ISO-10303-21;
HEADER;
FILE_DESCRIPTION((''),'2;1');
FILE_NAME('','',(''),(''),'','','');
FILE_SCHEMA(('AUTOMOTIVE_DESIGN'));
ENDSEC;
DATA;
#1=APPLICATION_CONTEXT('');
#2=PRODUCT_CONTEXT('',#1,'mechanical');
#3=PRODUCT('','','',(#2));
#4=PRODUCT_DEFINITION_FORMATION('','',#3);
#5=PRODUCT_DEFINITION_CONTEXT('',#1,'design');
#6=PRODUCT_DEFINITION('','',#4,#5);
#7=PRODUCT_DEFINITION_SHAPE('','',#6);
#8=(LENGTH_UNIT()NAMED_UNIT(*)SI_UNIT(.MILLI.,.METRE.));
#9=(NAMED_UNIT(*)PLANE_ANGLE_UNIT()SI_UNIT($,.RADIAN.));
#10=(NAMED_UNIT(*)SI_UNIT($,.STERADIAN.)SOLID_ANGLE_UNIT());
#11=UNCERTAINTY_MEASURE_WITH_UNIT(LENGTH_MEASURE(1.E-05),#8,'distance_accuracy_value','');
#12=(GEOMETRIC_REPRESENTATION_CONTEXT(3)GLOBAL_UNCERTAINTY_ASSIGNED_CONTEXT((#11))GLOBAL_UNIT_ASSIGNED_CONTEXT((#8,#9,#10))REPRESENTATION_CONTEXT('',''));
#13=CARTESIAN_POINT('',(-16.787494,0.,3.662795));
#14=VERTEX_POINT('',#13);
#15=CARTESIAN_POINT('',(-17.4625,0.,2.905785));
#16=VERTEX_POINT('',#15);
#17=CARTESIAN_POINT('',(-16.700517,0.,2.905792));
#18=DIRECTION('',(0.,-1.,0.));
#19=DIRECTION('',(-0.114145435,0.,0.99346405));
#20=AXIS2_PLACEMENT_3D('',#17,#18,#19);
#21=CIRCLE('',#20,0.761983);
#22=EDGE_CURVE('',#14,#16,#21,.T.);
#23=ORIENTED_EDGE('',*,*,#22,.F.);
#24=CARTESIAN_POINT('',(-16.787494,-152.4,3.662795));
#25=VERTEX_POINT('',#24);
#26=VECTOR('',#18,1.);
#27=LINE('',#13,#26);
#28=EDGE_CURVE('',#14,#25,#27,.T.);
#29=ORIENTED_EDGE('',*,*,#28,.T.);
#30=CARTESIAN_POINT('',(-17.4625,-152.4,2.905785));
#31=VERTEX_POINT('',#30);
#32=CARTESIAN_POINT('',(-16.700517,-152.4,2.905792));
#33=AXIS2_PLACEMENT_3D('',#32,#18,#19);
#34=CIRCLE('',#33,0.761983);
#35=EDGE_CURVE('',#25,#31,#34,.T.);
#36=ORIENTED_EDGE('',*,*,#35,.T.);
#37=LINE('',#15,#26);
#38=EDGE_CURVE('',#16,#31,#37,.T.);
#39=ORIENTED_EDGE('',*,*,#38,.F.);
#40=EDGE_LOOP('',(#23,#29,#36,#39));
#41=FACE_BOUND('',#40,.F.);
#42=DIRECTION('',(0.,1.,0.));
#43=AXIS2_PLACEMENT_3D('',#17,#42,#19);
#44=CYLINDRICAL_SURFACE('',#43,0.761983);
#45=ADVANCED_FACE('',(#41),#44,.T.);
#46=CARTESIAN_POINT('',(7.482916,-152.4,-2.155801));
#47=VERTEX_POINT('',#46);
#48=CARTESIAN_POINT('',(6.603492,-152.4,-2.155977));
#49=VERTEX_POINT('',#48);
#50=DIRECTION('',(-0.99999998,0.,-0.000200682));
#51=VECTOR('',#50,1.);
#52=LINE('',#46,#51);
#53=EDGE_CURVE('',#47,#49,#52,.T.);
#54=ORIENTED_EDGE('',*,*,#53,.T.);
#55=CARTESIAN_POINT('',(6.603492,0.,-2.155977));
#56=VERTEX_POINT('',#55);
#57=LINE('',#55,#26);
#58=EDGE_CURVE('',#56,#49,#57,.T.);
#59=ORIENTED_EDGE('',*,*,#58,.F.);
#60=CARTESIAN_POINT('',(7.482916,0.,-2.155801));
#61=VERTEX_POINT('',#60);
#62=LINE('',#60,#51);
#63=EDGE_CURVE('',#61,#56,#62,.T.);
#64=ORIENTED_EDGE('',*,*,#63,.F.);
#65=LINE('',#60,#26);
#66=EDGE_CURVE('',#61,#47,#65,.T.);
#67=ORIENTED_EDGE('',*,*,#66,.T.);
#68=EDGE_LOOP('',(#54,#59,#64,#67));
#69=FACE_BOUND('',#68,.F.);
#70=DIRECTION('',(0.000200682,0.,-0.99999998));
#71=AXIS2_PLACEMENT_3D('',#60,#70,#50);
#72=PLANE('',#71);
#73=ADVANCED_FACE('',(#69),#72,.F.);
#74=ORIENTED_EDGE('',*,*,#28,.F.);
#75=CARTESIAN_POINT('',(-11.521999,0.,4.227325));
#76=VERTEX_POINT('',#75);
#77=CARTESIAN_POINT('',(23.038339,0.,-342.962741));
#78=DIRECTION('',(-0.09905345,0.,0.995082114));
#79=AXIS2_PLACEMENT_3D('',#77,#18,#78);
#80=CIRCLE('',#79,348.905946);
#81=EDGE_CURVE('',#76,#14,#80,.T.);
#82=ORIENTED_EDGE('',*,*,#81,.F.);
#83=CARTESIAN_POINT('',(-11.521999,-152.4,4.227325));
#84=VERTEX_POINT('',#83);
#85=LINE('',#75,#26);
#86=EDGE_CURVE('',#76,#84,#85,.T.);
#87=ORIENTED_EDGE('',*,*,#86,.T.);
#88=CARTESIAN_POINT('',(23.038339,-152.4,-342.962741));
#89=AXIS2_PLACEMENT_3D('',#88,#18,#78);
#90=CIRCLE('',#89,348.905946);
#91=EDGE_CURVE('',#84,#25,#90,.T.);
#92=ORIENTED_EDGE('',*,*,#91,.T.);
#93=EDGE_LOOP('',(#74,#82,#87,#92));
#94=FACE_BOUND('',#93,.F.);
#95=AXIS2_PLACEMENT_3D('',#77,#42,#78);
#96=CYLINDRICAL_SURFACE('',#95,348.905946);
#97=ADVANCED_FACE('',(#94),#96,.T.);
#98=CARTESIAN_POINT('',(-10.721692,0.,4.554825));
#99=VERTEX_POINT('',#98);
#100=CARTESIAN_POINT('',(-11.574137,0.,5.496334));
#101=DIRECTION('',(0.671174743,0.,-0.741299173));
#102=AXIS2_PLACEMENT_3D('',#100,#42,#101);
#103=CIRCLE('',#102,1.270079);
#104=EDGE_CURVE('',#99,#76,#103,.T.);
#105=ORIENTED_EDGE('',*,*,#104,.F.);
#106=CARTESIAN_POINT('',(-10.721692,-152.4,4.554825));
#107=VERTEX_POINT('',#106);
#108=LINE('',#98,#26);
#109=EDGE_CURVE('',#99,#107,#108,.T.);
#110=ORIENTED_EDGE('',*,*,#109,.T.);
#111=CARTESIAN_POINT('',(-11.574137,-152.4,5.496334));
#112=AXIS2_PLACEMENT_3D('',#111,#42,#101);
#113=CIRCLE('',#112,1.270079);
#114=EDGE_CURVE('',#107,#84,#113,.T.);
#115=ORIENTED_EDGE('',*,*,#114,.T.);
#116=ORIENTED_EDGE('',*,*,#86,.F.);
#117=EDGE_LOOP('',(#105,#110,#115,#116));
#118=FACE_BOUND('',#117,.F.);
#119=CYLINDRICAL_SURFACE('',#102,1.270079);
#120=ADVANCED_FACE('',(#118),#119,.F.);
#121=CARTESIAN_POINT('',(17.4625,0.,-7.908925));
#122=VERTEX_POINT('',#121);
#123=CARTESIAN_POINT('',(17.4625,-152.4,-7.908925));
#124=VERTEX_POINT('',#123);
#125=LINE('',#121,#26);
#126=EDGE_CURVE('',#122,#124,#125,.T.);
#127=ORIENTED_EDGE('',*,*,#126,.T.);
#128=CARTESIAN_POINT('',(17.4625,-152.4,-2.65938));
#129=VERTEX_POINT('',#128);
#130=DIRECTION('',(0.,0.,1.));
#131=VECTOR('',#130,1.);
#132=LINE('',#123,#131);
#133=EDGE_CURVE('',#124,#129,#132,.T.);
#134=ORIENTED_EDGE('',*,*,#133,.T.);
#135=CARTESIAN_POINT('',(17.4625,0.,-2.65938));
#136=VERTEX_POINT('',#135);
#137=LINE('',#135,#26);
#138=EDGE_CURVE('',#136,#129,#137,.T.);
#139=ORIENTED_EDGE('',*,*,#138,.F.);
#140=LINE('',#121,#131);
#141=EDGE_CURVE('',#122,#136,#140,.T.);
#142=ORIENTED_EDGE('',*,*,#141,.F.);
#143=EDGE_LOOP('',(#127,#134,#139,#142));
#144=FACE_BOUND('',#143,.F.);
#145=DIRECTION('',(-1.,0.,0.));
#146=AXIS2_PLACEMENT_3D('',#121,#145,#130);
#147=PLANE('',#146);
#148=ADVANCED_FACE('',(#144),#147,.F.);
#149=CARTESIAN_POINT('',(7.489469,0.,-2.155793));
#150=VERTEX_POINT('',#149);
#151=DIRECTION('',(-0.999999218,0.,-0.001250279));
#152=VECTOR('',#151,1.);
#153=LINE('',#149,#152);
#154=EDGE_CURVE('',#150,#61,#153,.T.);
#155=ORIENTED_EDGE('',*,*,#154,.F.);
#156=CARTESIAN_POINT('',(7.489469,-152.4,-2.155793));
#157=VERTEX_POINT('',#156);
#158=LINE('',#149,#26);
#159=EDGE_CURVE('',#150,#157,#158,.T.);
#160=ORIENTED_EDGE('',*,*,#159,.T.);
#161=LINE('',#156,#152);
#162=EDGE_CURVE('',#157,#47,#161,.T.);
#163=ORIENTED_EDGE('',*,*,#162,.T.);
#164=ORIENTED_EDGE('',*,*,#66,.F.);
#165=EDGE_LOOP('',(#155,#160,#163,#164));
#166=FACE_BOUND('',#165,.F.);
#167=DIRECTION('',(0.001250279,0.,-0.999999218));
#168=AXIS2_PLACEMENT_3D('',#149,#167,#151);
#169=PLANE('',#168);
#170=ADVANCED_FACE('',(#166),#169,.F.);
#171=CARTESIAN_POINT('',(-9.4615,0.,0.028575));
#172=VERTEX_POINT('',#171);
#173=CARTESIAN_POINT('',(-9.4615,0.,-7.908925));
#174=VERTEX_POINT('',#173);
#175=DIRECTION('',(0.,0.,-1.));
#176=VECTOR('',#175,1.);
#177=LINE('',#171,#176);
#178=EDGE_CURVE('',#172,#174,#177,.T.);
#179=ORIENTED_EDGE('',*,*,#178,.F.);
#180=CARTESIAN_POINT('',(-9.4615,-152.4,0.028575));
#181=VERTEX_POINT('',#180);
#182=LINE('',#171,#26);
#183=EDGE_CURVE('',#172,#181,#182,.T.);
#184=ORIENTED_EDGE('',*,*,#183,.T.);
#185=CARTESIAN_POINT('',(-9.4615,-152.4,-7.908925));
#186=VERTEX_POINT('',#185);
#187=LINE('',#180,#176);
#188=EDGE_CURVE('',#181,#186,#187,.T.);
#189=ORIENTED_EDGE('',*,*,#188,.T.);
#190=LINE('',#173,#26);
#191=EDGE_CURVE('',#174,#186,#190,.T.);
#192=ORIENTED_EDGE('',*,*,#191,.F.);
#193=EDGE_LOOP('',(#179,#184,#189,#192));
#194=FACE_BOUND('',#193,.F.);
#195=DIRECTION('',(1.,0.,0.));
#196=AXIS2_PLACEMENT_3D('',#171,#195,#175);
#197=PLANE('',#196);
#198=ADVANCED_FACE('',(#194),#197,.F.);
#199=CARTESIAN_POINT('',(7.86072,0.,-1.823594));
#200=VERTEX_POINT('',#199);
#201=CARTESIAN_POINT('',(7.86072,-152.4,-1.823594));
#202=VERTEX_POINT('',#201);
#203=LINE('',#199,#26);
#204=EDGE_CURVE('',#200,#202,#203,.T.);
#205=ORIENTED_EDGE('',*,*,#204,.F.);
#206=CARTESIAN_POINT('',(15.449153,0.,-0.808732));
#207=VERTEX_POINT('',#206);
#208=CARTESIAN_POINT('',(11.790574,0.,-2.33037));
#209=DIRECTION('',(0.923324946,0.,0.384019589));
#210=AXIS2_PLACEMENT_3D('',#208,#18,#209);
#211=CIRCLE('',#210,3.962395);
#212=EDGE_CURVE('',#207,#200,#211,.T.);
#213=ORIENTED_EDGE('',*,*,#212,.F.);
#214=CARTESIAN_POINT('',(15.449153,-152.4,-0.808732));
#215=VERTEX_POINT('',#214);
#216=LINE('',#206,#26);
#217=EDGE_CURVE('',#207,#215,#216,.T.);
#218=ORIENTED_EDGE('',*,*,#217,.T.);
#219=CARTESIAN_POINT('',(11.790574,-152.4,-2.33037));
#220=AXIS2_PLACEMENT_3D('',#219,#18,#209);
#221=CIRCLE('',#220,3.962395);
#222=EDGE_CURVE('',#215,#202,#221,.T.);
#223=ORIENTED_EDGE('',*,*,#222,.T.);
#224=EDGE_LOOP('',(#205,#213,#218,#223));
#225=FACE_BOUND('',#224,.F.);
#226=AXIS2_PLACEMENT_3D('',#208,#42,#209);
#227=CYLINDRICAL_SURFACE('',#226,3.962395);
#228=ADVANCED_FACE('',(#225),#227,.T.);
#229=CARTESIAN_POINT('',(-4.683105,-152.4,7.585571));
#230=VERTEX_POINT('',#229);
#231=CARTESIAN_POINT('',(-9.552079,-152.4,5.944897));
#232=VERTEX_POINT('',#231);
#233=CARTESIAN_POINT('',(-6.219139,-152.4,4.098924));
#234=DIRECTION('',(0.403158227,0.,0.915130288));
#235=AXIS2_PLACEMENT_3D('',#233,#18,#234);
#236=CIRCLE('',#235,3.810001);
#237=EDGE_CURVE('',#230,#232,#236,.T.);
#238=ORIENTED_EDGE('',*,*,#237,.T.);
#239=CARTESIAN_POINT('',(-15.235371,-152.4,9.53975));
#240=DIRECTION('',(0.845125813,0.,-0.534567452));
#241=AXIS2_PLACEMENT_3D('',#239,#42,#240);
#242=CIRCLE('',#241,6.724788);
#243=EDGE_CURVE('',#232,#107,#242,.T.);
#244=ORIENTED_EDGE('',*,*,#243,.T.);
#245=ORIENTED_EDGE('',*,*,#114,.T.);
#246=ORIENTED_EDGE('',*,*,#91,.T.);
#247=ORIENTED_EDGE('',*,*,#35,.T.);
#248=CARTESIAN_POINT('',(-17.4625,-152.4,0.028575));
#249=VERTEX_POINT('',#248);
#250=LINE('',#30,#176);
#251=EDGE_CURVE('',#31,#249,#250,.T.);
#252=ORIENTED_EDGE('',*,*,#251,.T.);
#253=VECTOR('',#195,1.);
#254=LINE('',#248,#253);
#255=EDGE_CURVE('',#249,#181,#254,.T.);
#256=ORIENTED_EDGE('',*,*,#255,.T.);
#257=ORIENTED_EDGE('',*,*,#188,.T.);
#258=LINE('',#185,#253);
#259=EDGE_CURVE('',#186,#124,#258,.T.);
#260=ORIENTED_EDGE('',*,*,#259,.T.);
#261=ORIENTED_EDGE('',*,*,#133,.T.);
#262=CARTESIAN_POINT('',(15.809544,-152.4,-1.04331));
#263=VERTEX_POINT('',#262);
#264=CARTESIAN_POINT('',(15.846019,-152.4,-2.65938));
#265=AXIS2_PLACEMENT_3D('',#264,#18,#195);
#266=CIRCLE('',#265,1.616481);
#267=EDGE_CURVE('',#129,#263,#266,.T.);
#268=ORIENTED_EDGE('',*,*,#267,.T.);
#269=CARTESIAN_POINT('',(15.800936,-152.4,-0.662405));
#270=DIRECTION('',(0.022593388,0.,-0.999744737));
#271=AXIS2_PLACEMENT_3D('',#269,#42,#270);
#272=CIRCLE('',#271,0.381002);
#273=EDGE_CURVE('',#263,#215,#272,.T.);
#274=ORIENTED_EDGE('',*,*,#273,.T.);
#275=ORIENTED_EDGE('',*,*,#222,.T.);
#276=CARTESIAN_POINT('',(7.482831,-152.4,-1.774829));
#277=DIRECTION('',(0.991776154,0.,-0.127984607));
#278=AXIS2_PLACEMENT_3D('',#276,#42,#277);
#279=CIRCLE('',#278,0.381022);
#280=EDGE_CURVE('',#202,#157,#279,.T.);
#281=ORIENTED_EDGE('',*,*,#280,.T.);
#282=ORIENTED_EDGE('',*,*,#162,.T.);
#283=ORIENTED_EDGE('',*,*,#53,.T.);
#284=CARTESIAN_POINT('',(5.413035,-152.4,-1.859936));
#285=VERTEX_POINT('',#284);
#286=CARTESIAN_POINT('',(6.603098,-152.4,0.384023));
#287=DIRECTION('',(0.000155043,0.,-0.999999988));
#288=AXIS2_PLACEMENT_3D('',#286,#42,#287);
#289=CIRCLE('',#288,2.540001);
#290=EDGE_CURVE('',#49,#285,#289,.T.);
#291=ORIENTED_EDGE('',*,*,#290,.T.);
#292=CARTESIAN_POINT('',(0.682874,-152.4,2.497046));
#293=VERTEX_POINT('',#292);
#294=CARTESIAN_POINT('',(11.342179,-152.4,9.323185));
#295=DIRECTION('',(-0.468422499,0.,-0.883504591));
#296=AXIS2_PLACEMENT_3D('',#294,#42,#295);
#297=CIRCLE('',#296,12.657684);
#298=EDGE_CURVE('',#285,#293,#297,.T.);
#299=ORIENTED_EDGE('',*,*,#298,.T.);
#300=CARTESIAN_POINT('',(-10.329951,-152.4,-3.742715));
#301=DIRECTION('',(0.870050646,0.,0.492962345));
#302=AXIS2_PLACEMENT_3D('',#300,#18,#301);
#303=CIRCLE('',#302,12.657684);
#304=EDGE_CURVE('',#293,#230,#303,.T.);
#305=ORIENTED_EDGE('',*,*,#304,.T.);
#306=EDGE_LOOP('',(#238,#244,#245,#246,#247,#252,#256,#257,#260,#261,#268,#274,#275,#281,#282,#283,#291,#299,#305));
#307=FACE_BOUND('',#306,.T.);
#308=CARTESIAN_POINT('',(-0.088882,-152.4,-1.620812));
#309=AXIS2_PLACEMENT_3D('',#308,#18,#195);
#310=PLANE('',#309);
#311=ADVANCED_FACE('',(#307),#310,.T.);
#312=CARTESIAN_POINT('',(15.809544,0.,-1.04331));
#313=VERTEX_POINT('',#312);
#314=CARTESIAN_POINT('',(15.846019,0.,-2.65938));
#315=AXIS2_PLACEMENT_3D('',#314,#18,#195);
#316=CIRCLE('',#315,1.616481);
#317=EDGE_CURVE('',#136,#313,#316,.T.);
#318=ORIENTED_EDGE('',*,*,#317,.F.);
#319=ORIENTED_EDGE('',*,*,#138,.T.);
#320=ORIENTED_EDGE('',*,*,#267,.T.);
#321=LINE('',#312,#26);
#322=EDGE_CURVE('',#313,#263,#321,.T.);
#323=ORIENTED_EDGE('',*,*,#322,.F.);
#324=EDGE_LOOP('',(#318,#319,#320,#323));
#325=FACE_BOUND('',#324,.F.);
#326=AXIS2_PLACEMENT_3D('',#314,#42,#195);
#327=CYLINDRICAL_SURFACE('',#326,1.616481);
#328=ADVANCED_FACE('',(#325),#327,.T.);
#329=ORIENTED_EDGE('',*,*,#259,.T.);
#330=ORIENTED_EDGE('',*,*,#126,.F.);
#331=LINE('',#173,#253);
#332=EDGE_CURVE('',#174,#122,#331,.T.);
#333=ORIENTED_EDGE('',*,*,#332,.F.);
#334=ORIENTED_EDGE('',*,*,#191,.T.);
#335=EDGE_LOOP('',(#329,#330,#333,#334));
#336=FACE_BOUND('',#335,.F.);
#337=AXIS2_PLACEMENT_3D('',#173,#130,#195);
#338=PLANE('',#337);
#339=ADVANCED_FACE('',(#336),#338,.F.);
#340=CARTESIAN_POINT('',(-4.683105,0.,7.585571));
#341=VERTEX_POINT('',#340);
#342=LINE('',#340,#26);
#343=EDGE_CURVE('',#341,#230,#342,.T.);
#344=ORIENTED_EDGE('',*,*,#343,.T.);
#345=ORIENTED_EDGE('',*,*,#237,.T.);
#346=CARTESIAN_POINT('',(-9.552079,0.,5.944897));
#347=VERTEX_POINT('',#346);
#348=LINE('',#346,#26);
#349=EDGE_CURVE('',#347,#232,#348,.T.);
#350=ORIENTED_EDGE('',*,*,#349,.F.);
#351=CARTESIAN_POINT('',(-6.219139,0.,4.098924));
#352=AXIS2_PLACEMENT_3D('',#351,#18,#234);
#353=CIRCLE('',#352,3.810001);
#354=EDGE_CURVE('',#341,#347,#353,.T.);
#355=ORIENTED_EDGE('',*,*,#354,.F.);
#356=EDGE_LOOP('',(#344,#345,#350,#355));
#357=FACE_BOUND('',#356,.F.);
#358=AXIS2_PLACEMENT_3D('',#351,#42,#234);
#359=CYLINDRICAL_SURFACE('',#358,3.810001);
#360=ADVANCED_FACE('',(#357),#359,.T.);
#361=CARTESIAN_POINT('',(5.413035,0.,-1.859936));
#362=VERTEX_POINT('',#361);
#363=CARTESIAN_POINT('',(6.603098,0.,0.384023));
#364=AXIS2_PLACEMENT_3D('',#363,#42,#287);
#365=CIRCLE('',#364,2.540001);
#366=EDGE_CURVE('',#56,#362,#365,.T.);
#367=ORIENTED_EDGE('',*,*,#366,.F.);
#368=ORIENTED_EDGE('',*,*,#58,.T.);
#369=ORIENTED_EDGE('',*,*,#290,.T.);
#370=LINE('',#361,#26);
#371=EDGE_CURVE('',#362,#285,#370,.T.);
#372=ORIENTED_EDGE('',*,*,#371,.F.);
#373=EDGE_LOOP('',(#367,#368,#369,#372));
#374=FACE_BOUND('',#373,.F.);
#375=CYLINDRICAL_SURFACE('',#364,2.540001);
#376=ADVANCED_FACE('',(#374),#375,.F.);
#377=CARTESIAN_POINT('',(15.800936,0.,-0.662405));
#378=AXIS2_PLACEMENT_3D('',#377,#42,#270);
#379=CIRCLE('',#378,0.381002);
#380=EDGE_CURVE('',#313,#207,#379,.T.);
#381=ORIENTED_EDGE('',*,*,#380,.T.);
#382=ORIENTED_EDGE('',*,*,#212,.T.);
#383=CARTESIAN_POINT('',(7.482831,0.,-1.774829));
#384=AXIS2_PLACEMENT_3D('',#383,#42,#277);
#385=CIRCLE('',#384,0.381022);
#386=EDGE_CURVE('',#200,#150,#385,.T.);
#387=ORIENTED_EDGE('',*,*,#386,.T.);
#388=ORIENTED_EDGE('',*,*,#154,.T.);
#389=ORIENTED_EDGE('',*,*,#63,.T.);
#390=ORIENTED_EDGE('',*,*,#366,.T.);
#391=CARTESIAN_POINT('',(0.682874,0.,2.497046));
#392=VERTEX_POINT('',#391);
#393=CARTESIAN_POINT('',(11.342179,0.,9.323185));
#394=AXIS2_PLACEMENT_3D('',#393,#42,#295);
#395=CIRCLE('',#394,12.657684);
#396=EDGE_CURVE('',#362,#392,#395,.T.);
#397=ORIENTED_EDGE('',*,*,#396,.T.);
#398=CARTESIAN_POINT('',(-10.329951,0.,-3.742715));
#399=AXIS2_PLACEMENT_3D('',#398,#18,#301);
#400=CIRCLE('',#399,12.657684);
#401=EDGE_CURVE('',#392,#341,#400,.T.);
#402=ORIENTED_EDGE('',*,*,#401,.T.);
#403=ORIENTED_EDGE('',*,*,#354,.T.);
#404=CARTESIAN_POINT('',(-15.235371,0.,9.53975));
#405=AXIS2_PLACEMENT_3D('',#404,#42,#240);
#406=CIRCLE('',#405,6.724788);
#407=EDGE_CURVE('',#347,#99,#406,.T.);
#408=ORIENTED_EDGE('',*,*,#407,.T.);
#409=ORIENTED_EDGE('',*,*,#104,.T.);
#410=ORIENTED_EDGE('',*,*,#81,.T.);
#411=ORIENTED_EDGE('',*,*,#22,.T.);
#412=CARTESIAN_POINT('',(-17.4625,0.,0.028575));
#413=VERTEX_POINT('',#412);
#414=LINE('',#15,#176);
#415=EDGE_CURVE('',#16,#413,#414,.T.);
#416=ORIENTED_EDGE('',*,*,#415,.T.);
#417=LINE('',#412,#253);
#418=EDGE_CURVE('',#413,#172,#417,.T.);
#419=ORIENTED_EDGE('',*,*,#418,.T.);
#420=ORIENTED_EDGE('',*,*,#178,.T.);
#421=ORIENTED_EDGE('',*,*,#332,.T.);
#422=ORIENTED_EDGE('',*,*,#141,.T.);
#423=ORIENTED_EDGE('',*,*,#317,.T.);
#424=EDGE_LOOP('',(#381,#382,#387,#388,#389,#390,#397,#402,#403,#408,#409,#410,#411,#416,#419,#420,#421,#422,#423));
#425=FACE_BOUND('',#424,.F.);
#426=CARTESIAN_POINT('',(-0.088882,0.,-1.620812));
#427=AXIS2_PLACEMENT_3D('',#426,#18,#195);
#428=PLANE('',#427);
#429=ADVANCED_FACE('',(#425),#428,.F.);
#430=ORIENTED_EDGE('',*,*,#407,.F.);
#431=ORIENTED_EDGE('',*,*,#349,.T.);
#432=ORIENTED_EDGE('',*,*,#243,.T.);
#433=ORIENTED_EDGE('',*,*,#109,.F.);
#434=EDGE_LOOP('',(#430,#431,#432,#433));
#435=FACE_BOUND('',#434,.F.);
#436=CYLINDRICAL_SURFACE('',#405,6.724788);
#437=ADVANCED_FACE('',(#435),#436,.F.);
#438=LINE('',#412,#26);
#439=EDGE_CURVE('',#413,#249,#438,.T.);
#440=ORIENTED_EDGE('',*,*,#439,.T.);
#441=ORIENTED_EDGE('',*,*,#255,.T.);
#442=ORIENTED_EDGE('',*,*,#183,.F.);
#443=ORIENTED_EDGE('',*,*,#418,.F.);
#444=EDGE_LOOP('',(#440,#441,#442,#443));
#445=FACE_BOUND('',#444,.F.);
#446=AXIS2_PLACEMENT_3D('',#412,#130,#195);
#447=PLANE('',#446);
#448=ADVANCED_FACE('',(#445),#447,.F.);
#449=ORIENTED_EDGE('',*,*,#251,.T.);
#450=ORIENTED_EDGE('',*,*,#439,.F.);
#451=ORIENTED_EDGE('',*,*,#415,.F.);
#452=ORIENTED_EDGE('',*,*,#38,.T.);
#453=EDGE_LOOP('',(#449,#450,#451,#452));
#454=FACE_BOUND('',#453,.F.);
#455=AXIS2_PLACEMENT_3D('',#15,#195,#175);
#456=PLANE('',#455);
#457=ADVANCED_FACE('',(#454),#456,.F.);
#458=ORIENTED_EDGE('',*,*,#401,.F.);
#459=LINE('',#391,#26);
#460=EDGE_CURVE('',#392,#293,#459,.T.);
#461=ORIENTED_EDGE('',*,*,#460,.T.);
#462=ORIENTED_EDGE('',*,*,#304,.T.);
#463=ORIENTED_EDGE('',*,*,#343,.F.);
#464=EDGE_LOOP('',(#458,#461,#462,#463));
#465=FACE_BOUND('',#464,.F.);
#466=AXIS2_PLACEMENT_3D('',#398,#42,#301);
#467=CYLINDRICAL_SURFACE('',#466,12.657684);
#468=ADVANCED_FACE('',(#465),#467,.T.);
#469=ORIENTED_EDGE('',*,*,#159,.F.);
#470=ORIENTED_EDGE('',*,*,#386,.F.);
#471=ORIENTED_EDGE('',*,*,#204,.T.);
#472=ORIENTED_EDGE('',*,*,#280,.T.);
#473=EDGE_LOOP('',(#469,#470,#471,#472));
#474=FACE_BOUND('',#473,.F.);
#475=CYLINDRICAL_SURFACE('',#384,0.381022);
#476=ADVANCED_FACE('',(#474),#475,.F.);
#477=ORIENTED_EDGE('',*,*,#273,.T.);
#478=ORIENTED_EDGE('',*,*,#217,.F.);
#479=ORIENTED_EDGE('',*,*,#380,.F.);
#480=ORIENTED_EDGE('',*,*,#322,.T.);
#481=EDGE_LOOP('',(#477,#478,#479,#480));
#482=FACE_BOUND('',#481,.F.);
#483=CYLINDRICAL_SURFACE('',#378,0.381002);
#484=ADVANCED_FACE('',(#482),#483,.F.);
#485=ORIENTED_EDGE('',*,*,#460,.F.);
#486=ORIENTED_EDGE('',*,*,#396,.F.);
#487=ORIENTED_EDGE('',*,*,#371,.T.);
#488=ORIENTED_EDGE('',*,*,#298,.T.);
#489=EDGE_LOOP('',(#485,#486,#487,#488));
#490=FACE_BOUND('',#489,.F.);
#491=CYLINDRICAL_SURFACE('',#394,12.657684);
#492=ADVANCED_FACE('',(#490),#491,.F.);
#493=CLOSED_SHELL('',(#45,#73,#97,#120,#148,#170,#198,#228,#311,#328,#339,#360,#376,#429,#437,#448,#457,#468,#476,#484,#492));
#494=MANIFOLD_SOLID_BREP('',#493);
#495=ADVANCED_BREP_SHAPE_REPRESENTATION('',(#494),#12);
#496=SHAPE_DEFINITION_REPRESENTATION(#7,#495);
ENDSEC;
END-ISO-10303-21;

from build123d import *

# Parameters (mm, degrees)
F1_DEPTH = 152.4


# Not quite as in the source:
# - ends of sketch curves that miss each other by under 0.0002 mm in the source are joined


with BuildPart() as f1:
    # F0 (on Front) → F1 (new body)
    with BuildSketch(Plane.XZ):
        with BuildLine():
            Line((-9.4615, 0.028575), (-9.4615, -7.908925))
            Line((-9.4615, -7.908925), (17.4625, -7.908925))
            Line((17.4625, -7.908925), (17.4625, -2.65938))
            ThreePointArc((17.4625, -2.65938), (16.9760741715, -1.5035311682), (15.8095437434, -1.0433101682))
            ThreePointArc((15.8095437434, -1.0433101682), (15.5930919547, -0.9817228233), (15.4491526844, -0.8087322213))
            ThreePointArc((15.4491526844, -0.8087322213), (11.2653307166, 1.5970590296), (7.8607199392, -1.8235935338))
            ThreePointArc((7.8607199392, -1.8235935338), (7.736905149, -2.0587727487), (7.4894692803, -2.1557927219))
            Line((7.4894692803, -2.1557927219), (7.4829161901, -2.1558009151))
            Line((7.4829161901, -2.1558009151), (6.603492, -2.1559774))
            ThreePointArc((6.603492, -2.1559774), (5.9901232061, -2.0809037525), (5.413035163, -1.8599360759))
            ThreePointArc((5.413035163, -1.8599360759), (2.7666336142, 0.0131384296), (0.682874392, 2.4970459891))
            ThreePointArc((0.682874392, 2.4970459891), (-1.6202189431, 5.441919304), (-4.6831053409, 7.585571483))
            ThreePointArc((-4.6831053409, 7.585571483), (-7.435761648, 7.7094554069), (-9.5520790293, 5.9448968563))
            ThreePointArc((-9.5520790293, 5.9448968563), (-10.089729001, 5.2101835463), (-10.7216915696, 4.5548251488))
            ThreePointArc((-10.7216915696, 4.5548251488), (-11.0931160448, 4.3208677831), (-11.52199893, 4.2273251642))
            ThreePointArc((-11.52199893, 4.2273251642), (-14.1558174385, 3.9550500254), (-16.7874935974, 3.6627947922))
            ThreePointArc((-16.7874935974, 3.6627947922), (-17.2692415305, 3.4129116875), (-17.4625, 2.9057854))
            Line((-17.4625, 2.9057854), (-17.4625, 0.028575))
            Line((-17.4625, 0.028575), (-9.4615, 0.028575))
        make_face()
    extrude(amount=F1_DEPTH)


solid = f1.part
